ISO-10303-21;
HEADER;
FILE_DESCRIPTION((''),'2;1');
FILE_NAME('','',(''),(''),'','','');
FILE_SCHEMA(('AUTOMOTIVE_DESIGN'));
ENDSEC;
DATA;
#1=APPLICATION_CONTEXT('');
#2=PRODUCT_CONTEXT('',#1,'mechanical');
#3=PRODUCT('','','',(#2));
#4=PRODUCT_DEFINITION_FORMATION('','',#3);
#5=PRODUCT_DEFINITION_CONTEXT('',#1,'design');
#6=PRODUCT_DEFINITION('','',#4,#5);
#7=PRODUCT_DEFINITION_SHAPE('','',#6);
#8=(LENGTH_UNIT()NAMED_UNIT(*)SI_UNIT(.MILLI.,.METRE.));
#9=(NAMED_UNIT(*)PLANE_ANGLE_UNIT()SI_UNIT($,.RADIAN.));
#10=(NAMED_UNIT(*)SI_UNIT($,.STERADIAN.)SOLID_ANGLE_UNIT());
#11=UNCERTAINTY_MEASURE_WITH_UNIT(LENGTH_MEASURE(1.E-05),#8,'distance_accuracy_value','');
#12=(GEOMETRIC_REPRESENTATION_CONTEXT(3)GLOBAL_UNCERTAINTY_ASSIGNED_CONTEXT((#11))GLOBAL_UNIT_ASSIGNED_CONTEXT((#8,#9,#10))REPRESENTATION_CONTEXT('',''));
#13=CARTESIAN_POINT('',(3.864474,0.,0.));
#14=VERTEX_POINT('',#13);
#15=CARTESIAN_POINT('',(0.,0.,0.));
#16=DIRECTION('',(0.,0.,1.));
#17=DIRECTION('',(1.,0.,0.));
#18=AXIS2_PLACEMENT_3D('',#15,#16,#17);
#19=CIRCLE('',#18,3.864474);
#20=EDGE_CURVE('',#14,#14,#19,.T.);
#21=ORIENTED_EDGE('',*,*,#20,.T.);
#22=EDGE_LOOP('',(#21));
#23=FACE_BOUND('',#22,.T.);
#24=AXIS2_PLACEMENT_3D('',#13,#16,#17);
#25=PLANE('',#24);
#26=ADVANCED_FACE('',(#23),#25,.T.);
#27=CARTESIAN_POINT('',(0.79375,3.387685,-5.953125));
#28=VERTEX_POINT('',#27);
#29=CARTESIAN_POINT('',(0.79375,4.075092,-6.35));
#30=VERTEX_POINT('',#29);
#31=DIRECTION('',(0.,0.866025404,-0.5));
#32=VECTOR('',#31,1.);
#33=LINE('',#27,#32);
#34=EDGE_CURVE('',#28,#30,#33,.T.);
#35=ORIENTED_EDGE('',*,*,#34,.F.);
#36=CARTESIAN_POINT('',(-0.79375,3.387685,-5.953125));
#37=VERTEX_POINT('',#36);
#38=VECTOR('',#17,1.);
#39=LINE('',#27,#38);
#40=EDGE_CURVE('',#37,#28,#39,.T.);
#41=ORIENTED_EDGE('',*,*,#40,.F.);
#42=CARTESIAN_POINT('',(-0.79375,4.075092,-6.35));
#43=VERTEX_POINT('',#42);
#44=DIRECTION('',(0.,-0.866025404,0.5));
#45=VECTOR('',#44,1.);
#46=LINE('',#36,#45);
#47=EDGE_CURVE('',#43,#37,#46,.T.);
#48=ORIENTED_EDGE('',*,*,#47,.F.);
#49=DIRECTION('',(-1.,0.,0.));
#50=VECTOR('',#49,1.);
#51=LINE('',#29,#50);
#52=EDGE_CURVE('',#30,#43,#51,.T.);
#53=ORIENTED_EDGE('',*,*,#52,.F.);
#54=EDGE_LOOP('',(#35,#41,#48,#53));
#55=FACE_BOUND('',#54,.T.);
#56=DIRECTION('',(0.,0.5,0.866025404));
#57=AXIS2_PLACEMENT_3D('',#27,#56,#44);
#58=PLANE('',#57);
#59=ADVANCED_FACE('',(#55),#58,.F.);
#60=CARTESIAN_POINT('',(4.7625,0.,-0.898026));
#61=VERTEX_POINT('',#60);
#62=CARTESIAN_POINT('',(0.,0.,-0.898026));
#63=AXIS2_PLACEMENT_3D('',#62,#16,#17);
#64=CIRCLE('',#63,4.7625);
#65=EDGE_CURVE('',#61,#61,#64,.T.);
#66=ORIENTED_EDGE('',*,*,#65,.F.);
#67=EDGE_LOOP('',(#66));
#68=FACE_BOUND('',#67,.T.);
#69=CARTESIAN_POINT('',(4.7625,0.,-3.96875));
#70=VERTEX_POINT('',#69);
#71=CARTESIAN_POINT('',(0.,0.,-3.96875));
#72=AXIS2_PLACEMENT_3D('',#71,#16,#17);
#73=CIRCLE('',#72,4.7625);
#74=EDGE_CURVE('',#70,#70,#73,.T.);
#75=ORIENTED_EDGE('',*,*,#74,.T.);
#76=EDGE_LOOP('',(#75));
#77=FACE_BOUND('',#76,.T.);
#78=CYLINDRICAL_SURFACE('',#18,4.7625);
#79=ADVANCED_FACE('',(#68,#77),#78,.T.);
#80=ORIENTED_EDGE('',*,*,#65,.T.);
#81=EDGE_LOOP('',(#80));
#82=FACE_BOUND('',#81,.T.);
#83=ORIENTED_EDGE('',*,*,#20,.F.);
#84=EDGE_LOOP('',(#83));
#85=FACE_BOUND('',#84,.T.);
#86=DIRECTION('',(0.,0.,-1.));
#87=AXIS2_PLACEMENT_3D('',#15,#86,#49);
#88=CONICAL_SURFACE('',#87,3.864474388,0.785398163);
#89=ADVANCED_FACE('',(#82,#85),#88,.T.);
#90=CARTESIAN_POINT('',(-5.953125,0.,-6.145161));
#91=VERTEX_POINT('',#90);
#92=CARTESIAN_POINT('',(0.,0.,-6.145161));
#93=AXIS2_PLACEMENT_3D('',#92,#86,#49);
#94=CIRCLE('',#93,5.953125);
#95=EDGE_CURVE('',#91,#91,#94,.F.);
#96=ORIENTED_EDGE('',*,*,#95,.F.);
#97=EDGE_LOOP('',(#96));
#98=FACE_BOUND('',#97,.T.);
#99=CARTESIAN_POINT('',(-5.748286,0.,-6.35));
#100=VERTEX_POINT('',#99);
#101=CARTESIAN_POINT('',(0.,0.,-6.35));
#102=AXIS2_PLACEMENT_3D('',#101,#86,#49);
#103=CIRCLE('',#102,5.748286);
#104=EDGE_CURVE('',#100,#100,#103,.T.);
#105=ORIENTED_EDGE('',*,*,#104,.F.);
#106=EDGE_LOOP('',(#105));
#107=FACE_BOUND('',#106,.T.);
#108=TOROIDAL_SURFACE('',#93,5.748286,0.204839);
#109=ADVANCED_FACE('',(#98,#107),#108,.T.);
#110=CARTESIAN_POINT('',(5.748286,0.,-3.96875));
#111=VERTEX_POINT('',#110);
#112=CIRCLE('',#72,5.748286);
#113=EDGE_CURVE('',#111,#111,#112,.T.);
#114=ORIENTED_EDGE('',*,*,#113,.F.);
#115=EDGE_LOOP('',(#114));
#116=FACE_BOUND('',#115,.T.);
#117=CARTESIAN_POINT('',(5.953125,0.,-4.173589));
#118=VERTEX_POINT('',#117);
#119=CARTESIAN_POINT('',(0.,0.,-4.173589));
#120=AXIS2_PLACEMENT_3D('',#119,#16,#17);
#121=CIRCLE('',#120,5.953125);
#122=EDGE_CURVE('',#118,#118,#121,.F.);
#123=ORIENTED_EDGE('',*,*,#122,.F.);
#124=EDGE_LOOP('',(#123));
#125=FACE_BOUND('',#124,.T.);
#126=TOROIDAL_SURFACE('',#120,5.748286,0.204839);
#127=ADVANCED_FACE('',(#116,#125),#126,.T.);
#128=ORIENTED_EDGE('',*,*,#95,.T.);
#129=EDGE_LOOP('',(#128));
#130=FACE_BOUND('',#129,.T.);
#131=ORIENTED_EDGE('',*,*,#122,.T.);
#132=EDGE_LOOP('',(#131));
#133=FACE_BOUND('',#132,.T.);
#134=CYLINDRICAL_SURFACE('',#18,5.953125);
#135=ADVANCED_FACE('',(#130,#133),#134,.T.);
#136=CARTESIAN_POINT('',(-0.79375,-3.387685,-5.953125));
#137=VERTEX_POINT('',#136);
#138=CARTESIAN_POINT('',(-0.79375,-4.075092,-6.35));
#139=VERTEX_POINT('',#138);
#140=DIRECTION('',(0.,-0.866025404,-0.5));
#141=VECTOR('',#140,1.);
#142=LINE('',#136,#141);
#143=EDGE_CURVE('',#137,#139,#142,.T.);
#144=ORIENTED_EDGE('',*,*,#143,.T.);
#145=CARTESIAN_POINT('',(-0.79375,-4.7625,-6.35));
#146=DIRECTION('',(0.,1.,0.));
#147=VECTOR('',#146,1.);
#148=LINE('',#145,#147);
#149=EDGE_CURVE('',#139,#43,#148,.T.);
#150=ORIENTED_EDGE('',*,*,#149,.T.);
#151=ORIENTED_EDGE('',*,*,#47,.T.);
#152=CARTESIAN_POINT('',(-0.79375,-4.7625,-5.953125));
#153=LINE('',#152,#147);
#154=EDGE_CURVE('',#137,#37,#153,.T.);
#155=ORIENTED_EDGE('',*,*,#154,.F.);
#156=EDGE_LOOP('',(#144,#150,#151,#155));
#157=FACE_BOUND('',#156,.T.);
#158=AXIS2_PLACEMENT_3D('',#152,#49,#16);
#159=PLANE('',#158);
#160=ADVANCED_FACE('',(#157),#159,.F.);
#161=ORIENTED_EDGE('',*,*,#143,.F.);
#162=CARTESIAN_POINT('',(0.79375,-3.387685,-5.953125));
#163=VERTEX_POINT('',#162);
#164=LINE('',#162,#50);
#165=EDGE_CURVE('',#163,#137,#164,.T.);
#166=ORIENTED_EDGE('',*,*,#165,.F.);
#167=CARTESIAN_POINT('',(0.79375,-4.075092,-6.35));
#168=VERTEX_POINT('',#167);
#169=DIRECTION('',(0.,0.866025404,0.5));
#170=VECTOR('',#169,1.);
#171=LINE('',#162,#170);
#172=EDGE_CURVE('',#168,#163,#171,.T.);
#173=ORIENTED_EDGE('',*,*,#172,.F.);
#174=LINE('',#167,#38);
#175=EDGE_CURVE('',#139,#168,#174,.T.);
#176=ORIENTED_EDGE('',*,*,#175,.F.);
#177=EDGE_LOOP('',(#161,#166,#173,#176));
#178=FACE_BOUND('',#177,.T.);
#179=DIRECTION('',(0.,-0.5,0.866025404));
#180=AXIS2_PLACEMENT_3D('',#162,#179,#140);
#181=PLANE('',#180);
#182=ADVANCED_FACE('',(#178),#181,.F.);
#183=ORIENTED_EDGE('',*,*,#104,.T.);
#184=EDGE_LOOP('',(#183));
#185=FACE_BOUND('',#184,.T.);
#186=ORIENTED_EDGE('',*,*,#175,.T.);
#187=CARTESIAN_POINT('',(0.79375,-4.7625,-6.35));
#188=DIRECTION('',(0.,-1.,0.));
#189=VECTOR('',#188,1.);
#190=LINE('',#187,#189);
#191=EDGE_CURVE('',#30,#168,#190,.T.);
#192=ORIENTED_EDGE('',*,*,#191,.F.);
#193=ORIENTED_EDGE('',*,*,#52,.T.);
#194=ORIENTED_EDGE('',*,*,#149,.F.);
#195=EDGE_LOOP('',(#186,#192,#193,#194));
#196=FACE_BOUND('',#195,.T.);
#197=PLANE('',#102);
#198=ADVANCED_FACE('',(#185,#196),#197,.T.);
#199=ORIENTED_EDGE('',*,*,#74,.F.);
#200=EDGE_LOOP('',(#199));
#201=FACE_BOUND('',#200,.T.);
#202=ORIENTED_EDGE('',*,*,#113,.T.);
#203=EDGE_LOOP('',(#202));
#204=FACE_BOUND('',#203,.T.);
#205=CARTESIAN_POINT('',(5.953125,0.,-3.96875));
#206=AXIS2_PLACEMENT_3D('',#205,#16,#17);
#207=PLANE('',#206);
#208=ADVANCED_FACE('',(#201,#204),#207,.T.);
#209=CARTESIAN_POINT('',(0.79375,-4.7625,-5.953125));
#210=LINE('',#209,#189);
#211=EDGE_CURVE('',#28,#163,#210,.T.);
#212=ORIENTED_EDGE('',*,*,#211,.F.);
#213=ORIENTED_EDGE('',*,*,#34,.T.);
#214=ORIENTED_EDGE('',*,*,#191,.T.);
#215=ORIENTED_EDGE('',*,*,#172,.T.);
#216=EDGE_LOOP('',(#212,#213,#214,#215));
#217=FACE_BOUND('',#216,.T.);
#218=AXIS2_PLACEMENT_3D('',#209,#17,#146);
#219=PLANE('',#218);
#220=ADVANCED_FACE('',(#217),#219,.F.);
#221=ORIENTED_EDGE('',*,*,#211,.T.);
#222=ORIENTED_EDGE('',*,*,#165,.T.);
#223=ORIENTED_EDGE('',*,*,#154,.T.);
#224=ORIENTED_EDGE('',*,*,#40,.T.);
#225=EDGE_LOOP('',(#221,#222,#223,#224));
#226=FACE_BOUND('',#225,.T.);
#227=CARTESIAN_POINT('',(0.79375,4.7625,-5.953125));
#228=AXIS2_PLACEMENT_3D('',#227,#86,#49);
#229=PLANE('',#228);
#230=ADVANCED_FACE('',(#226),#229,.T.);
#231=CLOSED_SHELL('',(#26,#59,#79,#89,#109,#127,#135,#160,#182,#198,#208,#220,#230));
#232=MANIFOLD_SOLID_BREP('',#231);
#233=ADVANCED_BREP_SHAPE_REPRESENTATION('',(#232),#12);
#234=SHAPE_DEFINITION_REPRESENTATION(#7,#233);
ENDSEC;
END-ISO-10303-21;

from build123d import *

# Parameters (mm, degrees)
FILLET1_R          = 0.20483871
SKETCH2_W          = 1.5875
SKETCH2_H          = 9.525
CUT_EXTRUDE1_DEPTH = 0.396875
CHAMFER1_SIZE      = 0.79375
CHAMFER1_SIZE_2    = 1.374815329


with BuildPart() as part:
    # Sketch1 → Revolve1 (revolve)
    with BuildSketch(Plane(origin=(0, 0, 0), x_dir=(1, 0, 0), z_dir=(0, 1, 0))):
        Polygon((0, 6.35), (5.953125, 6.35), (5.953125, 3.96875), (4.7625, 3.96875), (4.7625, 0.898025612), (3.864474388, 0), (0, 0), align=None)
    revolve(axis=Axis((0, 0, 0), (0, 0, -1)))

    # Fillet1
    fillet1_edges = [part.edges().sort_by_distance(p)[0] for p in [
        (-5.953125, 0, -3.96875),
        (-5.953125, 0, -6.35),
    ]]
    fillet(fillet1_edges, radius=FILLET1_R)

    # Sketch2 → Cut-Extrude1 (cut)
    with BuildSketch(Plane(origin=(0, 0, -6.35), x_dir=(-1, 0, 0), z_dir=(0, 0, -1))):
        Rectangle(SKETCH2_W, SKETCH2_H)
    extrude(amount=-CUT_EXTRUDE1_DEPTH, mode=Mode.SUBTRACT)

    # Chamfer1
    # the kernel refuses this chamfer: 1.374815329, 0.79375 mm, written as the material it adds along each edge
    with BuildSketch(Plane(origin=(-0.79375, -4.7625, -5.953125), x_dir=(0, -0.057893862402671005, -0.9983227437537926), z_dir=(1, 0, 0))) as chamfer1_piece_1_section:
        Polygon((CHAMFER1_SIZE * 0.998322743754, CHAMFER1_SIZE * 0.0578938624027), (-CHAMFER1_SIZE_2 * 0.0578938623819, CHAMFER1_SIZE_2 * 0.998322743396), (0, 0), align=None)
    chamfer1_piece_1 = extrude(amount=1.5875, mode=Mode.PRIVATE)
    chamfer1_piece_1 = split(chamfer1_piece_1, bisect_by=Plane(origin=(0, -4.227849594, -6.35), z_dir=(0, 0, 1)), keep=Keep.TOP, mode=Mode.PRIVATE)
    add(chamfer1_piece_1)
    with BuildSketch(Plane(origin=(0.79375, 4.7625, -5.953125), x_dir=(0, 0.057893862402671005, -0.9983227437537926), z_dir=(-1, 0, 0))) as chamfer1_piece_2_section:
        Polygon((CHAMFER1_SIZE * 0.998322743754, CHAMFER1_SIZE * 0.0578938624027), (-CHAMFER1_SIZE_2 * 0.0578938623819, CHAMFER1_SIZE_2 * 0.998322743396), (0, 0), align=None)
    chamfer1_piece_2 = extrude(amount=1.5875, mode=Mode.PRIVATE)
    chamfer1_piece_2 = split(chamfer1_piece_2, bisect_by=Plane(origin=(0, 4.227849594, -6.35), z_dir=(0, 0, 1)), keep=Keep.TOP, mode=Mode.PRIVATE)
    add(chamfer1_piece_2)


solid = part.part
